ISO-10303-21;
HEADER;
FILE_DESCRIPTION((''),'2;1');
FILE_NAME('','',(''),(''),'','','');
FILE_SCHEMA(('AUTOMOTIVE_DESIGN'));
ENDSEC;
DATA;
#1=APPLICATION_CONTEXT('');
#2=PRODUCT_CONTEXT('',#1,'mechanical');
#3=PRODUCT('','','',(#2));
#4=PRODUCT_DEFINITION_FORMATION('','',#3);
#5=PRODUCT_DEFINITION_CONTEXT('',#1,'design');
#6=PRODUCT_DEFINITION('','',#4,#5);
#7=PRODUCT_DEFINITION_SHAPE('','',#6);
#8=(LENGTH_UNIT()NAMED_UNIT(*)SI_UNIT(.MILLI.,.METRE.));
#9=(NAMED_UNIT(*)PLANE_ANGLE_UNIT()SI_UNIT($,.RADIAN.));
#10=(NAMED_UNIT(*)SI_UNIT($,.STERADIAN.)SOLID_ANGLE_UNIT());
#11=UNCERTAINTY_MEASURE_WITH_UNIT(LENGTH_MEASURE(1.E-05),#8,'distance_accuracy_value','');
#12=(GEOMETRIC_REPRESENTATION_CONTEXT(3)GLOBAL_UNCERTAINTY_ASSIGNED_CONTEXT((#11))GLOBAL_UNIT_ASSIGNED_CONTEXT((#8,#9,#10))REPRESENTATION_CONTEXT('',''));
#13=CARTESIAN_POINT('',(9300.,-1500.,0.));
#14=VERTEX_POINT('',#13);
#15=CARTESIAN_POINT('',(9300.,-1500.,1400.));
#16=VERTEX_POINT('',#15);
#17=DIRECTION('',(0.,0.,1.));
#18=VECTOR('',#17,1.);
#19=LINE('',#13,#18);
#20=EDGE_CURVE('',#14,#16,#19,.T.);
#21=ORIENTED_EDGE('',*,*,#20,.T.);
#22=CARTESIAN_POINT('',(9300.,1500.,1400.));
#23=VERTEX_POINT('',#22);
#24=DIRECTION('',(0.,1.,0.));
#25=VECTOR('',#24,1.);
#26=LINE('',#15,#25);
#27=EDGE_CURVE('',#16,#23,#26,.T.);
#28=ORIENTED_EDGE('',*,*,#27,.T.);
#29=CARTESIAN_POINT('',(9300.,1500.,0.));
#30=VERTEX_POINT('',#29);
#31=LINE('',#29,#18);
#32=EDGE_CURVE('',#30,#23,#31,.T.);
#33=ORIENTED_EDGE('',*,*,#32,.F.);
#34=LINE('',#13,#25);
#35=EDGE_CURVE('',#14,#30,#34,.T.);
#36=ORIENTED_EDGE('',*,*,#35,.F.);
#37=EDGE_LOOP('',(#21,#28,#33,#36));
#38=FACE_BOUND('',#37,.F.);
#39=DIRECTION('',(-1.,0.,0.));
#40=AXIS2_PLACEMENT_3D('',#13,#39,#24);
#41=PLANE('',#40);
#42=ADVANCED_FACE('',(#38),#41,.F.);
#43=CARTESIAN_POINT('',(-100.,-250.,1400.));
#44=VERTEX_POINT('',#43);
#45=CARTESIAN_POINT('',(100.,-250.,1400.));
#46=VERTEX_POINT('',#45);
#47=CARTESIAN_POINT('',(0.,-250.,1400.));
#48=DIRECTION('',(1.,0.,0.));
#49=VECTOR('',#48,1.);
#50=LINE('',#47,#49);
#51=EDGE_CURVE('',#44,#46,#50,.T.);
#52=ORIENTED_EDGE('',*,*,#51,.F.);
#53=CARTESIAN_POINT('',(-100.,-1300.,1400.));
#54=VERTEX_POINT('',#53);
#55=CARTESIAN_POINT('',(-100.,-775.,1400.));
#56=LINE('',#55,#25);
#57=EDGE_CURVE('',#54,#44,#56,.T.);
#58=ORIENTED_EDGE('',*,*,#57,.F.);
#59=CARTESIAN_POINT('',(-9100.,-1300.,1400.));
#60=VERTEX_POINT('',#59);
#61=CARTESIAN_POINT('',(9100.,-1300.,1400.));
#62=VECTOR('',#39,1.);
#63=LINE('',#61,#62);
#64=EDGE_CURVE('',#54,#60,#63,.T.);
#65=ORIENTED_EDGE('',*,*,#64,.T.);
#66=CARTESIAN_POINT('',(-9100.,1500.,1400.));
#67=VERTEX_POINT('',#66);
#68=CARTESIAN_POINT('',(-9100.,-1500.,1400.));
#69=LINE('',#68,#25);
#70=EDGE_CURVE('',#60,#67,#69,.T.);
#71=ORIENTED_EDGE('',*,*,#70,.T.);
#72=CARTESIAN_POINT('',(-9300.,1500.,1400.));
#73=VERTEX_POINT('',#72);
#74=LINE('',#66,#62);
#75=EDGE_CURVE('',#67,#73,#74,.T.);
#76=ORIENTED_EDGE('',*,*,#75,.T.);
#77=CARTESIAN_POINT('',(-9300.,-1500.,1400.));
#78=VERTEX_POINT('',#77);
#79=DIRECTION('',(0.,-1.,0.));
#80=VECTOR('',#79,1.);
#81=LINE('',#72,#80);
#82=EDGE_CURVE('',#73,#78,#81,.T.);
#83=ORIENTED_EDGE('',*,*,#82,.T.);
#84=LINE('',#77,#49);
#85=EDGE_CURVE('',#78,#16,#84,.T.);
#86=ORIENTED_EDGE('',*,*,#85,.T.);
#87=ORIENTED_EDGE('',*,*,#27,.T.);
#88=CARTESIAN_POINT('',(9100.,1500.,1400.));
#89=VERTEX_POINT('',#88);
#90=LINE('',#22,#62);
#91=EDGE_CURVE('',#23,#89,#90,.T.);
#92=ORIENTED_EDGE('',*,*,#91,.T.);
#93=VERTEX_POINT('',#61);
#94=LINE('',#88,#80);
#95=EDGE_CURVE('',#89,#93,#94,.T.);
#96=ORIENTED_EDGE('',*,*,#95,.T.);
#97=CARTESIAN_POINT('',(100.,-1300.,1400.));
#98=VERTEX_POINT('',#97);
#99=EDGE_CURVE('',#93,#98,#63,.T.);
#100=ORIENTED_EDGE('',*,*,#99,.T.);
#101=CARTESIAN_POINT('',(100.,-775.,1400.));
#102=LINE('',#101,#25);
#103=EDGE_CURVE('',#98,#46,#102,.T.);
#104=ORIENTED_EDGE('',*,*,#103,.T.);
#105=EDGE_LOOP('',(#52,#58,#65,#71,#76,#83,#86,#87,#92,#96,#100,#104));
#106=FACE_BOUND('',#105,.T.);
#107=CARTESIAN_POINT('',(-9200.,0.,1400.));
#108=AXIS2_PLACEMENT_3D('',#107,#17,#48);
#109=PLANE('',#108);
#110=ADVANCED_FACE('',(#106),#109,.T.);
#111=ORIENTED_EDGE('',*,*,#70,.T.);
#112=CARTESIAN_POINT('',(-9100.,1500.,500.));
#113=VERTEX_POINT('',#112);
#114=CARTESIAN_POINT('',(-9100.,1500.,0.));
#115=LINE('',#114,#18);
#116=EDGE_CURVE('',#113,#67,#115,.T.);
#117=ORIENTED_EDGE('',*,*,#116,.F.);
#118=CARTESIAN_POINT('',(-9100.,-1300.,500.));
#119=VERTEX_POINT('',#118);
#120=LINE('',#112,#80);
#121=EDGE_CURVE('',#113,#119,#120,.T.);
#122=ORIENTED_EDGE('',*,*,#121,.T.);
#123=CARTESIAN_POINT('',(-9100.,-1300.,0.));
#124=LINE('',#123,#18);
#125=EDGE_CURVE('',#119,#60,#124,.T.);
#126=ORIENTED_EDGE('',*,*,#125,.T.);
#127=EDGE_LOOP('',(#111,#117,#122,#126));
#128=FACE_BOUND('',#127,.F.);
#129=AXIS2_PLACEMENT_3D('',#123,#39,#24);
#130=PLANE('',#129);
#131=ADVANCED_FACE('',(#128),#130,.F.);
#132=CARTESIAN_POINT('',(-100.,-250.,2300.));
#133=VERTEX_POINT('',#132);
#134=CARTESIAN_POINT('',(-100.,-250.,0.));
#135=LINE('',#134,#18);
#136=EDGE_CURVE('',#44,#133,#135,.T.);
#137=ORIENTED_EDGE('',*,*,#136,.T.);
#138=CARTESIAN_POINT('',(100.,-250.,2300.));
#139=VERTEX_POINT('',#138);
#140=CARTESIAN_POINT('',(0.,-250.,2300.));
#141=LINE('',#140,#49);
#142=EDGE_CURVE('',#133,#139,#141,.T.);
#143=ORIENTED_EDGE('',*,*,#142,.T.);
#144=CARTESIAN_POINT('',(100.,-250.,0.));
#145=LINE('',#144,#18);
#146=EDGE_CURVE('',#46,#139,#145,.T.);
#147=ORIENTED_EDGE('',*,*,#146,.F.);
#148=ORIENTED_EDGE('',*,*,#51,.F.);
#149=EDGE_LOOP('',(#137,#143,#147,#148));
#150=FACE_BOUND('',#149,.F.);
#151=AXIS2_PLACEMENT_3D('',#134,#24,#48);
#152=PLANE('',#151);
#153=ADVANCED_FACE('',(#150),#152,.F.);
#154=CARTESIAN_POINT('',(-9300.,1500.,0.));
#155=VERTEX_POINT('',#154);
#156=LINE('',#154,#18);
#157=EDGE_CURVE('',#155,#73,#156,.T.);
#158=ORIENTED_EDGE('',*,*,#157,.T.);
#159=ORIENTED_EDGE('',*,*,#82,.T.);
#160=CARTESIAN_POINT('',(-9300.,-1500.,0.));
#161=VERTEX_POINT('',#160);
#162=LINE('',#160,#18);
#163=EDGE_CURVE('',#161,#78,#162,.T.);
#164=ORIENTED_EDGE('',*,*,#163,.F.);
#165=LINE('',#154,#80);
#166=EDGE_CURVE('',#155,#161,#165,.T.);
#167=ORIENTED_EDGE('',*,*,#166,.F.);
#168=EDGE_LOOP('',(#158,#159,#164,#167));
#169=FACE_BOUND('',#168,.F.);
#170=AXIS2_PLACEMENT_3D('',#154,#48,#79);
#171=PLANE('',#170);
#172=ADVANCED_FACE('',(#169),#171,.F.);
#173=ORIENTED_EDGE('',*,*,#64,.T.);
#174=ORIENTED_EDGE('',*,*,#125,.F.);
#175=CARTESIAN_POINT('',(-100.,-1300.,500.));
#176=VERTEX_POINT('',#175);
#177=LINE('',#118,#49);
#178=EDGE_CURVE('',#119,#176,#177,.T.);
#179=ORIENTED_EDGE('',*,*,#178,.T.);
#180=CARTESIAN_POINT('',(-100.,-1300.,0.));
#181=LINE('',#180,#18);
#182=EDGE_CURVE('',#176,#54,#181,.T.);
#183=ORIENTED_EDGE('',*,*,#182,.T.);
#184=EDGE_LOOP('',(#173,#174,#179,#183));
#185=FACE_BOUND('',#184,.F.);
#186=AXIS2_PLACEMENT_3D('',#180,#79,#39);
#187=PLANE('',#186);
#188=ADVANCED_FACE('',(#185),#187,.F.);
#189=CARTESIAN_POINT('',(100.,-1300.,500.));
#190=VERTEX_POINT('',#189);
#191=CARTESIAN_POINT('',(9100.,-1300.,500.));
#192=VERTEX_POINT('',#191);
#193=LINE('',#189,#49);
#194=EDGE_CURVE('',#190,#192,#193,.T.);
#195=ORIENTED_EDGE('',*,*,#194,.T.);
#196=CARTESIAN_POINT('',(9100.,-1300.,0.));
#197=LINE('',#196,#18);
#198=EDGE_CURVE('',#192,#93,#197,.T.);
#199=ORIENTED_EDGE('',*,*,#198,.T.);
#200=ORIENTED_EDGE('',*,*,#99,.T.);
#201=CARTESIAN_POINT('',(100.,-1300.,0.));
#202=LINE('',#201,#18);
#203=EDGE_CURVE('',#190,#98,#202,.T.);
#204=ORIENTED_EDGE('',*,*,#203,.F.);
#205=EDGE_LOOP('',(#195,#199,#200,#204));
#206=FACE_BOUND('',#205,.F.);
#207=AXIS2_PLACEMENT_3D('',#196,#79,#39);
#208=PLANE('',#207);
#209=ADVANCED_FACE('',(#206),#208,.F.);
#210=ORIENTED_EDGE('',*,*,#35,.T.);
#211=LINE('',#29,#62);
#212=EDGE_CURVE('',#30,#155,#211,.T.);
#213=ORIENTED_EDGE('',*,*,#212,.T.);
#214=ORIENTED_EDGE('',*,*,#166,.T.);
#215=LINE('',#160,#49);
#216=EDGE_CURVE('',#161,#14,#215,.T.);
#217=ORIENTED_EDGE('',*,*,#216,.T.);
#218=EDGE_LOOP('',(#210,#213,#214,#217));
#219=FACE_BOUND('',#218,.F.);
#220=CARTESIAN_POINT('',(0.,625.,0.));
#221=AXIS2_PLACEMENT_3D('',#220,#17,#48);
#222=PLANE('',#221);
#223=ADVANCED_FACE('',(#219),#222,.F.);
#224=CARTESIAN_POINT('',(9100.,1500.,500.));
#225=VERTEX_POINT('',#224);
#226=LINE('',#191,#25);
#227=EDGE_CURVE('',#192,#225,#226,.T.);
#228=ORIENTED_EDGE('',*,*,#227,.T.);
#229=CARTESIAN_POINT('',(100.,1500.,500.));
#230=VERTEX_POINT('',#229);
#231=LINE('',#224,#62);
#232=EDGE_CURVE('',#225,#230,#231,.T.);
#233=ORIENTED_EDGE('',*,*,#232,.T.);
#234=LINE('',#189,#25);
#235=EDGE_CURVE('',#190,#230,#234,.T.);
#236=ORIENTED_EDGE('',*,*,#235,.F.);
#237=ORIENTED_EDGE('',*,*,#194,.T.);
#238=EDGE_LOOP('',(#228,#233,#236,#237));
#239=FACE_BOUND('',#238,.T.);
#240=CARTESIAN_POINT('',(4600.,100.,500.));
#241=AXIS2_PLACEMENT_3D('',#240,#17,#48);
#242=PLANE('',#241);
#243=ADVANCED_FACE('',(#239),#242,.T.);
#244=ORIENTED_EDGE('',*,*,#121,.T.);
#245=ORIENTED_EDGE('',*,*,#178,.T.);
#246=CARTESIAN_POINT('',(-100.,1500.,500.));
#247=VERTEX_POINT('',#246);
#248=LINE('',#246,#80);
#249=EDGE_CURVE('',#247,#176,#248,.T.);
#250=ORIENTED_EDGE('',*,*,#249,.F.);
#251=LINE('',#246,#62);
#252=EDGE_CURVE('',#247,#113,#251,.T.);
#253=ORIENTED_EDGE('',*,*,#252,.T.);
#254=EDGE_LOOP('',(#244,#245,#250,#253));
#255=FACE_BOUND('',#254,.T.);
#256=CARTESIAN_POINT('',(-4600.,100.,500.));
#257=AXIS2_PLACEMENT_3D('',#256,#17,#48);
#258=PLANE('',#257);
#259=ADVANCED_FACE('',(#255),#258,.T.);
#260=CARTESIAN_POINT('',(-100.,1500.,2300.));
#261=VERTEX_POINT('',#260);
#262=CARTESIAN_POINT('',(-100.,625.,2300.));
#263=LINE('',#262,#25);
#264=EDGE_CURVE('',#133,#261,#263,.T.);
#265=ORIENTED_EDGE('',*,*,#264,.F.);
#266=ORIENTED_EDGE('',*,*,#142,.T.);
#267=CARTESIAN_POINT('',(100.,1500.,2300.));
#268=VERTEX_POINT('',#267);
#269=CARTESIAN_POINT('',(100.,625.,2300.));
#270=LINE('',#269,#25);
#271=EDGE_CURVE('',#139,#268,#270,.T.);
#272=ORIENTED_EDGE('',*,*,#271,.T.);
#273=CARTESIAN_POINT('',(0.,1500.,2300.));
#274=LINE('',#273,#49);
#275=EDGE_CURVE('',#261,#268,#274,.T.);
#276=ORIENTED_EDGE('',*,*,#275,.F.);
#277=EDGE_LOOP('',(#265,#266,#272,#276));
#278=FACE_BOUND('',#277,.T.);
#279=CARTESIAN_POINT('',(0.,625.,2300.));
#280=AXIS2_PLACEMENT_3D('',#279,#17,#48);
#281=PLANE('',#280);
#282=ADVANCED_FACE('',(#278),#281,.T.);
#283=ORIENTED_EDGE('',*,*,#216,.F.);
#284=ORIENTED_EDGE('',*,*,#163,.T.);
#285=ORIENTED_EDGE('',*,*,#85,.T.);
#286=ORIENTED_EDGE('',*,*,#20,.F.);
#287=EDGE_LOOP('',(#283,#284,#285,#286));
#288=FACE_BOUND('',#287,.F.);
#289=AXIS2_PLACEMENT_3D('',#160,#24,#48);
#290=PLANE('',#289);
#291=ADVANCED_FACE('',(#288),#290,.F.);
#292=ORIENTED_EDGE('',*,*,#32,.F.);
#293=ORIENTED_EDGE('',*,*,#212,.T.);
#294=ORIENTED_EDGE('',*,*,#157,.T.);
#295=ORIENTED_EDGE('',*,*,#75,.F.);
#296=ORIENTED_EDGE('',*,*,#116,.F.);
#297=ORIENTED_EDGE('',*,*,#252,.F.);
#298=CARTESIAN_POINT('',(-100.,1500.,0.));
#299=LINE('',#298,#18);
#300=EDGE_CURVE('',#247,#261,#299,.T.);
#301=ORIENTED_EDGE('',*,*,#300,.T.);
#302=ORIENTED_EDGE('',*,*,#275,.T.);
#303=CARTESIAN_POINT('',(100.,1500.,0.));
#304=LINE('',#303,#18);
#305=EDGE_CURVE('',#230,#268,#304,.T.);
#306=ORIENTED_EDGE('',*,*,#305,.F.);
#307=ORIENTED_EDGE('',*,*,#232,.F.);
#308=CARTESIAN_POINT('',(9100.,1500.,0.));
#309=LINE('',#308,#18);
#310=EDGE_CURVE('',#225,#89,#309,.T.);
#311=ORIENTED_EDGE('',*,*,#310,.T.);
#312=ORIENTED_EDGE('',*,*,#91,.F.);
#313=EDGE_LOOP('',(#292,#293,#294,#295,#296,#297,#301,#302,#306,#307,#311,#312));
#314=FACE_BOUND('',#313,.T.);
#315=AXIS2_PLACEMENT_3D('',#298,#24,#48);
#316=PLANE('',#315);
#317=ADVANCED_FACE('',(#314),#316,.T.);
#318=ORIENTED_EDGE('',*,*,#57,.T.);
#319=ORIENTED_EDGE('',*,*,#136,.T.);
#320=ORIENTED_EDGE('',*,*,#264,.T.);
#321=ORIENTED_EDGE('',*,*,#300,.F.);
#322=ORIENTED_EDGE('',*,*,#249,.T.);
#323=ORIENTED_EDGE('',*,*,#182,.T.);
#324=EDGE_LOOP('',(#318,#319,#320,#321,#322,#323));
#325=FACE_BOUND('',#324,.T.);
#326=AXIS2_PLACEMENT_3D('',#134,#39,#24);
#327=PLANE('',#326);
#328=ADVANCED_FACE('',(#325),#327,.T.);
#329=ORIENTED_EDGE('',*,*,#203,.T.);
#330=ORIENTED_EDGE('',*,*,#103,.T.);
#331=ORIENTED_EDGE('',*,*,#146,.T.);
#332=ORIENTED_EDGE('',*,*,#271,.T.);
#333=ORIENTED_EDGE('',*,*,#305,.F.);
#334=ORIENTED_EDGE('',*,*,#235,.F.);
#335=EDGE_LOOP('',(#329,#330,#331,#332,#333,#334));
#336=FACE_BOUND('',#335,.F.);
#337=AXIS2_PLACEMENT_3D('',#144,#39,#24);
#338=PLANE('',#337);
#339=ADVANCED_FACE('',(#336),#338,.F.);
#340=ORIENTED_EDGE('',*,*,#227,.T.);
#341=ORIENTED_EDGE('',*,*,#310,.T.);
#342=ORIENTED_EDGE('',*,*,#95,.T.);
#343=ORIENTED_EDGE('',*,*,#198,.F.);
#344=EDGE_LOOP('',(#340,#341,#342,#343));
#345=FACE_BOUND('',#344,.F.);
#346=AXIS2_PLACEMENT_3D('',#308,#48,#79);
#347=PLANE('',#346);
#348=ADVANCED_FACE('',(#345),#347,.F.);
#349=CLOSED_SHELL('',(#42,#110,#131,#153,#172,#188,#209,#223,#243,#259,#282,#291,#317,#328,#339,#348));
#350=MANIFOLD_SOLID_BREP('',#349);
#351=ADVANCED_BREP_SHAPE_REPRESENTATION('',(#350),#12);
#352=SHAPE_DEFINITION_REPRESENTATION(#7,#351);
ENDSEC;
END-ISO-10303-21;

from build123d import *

# Parameters (mm, degrees)
F1_DEPTH = 500
F0_W     = 9000
F0_H     = 200
F0_W_2   = 200
F0_H_2   = 1050
F2_DEPTH = 1400
F0_H_3   = 1750
F3_DEPTH = 2300


with BuildPart() as f1:
    # F0 (on Top) → F1 (new body)
    with BuildSketch(Plane.XY):
        Polygon((-100, -250), (-100, 1500), (-9100, 1500), (-9100, -1300), (-100, -1300), align=None)
    extrude(amount=F1_DEPTH)



with BuildPart() as f1b:
    # F0 (on Top) → F1, piece 2 (new body)
    with BuildSketch(Plane.XY):
        Polygon((9100, -1300), (9100, 1500), (100, 1500), (100, -250), (100, -1300), align=None)
    extrude(amount=F1_DEPTH)


with BuildPart() as f2:
    # F0 (on Top) → F2 (new body)
    with BuildSketch(Plane.XY):
        Polygon((-9100, -1300), (-9100, 1500), (-9300, 1500), (-9300, -1500), (-9100, -1500), align=None)
        with Locations((-4600, -1400)):
            Rectangle(F0_W, F0_H)
        Polygon((9300, -1500), (9300, 1500), (9100, 1500), (9100, -1300), (9100, -1500), align=None)
        with Locations((4600, -1400)):
            Rectangle(F0_W, F0_H)
        with Locations((0, -1400)):
            Rectangle(F0_W_2, F0_H)
        with Locations((0, -775)):
            Rectangle(F0_W_2, F0_H_2)
    extrude(amount=F2_DEPTH)


with BuildPart() as f1_1:
    add(f1.part)

    add(f1b.part)  # F3 merges F1b

    add(f2.part)  # F3 merges F2
    # F0 (on Top) → F3 (join)
    with BuildSketch(Plane.XY):
        with Locations((0, 625)):
            Rectangle(F0_W_2, F0_H_3)
    extrude(amount=F3_DEPTH)


solid = f1_1.part
